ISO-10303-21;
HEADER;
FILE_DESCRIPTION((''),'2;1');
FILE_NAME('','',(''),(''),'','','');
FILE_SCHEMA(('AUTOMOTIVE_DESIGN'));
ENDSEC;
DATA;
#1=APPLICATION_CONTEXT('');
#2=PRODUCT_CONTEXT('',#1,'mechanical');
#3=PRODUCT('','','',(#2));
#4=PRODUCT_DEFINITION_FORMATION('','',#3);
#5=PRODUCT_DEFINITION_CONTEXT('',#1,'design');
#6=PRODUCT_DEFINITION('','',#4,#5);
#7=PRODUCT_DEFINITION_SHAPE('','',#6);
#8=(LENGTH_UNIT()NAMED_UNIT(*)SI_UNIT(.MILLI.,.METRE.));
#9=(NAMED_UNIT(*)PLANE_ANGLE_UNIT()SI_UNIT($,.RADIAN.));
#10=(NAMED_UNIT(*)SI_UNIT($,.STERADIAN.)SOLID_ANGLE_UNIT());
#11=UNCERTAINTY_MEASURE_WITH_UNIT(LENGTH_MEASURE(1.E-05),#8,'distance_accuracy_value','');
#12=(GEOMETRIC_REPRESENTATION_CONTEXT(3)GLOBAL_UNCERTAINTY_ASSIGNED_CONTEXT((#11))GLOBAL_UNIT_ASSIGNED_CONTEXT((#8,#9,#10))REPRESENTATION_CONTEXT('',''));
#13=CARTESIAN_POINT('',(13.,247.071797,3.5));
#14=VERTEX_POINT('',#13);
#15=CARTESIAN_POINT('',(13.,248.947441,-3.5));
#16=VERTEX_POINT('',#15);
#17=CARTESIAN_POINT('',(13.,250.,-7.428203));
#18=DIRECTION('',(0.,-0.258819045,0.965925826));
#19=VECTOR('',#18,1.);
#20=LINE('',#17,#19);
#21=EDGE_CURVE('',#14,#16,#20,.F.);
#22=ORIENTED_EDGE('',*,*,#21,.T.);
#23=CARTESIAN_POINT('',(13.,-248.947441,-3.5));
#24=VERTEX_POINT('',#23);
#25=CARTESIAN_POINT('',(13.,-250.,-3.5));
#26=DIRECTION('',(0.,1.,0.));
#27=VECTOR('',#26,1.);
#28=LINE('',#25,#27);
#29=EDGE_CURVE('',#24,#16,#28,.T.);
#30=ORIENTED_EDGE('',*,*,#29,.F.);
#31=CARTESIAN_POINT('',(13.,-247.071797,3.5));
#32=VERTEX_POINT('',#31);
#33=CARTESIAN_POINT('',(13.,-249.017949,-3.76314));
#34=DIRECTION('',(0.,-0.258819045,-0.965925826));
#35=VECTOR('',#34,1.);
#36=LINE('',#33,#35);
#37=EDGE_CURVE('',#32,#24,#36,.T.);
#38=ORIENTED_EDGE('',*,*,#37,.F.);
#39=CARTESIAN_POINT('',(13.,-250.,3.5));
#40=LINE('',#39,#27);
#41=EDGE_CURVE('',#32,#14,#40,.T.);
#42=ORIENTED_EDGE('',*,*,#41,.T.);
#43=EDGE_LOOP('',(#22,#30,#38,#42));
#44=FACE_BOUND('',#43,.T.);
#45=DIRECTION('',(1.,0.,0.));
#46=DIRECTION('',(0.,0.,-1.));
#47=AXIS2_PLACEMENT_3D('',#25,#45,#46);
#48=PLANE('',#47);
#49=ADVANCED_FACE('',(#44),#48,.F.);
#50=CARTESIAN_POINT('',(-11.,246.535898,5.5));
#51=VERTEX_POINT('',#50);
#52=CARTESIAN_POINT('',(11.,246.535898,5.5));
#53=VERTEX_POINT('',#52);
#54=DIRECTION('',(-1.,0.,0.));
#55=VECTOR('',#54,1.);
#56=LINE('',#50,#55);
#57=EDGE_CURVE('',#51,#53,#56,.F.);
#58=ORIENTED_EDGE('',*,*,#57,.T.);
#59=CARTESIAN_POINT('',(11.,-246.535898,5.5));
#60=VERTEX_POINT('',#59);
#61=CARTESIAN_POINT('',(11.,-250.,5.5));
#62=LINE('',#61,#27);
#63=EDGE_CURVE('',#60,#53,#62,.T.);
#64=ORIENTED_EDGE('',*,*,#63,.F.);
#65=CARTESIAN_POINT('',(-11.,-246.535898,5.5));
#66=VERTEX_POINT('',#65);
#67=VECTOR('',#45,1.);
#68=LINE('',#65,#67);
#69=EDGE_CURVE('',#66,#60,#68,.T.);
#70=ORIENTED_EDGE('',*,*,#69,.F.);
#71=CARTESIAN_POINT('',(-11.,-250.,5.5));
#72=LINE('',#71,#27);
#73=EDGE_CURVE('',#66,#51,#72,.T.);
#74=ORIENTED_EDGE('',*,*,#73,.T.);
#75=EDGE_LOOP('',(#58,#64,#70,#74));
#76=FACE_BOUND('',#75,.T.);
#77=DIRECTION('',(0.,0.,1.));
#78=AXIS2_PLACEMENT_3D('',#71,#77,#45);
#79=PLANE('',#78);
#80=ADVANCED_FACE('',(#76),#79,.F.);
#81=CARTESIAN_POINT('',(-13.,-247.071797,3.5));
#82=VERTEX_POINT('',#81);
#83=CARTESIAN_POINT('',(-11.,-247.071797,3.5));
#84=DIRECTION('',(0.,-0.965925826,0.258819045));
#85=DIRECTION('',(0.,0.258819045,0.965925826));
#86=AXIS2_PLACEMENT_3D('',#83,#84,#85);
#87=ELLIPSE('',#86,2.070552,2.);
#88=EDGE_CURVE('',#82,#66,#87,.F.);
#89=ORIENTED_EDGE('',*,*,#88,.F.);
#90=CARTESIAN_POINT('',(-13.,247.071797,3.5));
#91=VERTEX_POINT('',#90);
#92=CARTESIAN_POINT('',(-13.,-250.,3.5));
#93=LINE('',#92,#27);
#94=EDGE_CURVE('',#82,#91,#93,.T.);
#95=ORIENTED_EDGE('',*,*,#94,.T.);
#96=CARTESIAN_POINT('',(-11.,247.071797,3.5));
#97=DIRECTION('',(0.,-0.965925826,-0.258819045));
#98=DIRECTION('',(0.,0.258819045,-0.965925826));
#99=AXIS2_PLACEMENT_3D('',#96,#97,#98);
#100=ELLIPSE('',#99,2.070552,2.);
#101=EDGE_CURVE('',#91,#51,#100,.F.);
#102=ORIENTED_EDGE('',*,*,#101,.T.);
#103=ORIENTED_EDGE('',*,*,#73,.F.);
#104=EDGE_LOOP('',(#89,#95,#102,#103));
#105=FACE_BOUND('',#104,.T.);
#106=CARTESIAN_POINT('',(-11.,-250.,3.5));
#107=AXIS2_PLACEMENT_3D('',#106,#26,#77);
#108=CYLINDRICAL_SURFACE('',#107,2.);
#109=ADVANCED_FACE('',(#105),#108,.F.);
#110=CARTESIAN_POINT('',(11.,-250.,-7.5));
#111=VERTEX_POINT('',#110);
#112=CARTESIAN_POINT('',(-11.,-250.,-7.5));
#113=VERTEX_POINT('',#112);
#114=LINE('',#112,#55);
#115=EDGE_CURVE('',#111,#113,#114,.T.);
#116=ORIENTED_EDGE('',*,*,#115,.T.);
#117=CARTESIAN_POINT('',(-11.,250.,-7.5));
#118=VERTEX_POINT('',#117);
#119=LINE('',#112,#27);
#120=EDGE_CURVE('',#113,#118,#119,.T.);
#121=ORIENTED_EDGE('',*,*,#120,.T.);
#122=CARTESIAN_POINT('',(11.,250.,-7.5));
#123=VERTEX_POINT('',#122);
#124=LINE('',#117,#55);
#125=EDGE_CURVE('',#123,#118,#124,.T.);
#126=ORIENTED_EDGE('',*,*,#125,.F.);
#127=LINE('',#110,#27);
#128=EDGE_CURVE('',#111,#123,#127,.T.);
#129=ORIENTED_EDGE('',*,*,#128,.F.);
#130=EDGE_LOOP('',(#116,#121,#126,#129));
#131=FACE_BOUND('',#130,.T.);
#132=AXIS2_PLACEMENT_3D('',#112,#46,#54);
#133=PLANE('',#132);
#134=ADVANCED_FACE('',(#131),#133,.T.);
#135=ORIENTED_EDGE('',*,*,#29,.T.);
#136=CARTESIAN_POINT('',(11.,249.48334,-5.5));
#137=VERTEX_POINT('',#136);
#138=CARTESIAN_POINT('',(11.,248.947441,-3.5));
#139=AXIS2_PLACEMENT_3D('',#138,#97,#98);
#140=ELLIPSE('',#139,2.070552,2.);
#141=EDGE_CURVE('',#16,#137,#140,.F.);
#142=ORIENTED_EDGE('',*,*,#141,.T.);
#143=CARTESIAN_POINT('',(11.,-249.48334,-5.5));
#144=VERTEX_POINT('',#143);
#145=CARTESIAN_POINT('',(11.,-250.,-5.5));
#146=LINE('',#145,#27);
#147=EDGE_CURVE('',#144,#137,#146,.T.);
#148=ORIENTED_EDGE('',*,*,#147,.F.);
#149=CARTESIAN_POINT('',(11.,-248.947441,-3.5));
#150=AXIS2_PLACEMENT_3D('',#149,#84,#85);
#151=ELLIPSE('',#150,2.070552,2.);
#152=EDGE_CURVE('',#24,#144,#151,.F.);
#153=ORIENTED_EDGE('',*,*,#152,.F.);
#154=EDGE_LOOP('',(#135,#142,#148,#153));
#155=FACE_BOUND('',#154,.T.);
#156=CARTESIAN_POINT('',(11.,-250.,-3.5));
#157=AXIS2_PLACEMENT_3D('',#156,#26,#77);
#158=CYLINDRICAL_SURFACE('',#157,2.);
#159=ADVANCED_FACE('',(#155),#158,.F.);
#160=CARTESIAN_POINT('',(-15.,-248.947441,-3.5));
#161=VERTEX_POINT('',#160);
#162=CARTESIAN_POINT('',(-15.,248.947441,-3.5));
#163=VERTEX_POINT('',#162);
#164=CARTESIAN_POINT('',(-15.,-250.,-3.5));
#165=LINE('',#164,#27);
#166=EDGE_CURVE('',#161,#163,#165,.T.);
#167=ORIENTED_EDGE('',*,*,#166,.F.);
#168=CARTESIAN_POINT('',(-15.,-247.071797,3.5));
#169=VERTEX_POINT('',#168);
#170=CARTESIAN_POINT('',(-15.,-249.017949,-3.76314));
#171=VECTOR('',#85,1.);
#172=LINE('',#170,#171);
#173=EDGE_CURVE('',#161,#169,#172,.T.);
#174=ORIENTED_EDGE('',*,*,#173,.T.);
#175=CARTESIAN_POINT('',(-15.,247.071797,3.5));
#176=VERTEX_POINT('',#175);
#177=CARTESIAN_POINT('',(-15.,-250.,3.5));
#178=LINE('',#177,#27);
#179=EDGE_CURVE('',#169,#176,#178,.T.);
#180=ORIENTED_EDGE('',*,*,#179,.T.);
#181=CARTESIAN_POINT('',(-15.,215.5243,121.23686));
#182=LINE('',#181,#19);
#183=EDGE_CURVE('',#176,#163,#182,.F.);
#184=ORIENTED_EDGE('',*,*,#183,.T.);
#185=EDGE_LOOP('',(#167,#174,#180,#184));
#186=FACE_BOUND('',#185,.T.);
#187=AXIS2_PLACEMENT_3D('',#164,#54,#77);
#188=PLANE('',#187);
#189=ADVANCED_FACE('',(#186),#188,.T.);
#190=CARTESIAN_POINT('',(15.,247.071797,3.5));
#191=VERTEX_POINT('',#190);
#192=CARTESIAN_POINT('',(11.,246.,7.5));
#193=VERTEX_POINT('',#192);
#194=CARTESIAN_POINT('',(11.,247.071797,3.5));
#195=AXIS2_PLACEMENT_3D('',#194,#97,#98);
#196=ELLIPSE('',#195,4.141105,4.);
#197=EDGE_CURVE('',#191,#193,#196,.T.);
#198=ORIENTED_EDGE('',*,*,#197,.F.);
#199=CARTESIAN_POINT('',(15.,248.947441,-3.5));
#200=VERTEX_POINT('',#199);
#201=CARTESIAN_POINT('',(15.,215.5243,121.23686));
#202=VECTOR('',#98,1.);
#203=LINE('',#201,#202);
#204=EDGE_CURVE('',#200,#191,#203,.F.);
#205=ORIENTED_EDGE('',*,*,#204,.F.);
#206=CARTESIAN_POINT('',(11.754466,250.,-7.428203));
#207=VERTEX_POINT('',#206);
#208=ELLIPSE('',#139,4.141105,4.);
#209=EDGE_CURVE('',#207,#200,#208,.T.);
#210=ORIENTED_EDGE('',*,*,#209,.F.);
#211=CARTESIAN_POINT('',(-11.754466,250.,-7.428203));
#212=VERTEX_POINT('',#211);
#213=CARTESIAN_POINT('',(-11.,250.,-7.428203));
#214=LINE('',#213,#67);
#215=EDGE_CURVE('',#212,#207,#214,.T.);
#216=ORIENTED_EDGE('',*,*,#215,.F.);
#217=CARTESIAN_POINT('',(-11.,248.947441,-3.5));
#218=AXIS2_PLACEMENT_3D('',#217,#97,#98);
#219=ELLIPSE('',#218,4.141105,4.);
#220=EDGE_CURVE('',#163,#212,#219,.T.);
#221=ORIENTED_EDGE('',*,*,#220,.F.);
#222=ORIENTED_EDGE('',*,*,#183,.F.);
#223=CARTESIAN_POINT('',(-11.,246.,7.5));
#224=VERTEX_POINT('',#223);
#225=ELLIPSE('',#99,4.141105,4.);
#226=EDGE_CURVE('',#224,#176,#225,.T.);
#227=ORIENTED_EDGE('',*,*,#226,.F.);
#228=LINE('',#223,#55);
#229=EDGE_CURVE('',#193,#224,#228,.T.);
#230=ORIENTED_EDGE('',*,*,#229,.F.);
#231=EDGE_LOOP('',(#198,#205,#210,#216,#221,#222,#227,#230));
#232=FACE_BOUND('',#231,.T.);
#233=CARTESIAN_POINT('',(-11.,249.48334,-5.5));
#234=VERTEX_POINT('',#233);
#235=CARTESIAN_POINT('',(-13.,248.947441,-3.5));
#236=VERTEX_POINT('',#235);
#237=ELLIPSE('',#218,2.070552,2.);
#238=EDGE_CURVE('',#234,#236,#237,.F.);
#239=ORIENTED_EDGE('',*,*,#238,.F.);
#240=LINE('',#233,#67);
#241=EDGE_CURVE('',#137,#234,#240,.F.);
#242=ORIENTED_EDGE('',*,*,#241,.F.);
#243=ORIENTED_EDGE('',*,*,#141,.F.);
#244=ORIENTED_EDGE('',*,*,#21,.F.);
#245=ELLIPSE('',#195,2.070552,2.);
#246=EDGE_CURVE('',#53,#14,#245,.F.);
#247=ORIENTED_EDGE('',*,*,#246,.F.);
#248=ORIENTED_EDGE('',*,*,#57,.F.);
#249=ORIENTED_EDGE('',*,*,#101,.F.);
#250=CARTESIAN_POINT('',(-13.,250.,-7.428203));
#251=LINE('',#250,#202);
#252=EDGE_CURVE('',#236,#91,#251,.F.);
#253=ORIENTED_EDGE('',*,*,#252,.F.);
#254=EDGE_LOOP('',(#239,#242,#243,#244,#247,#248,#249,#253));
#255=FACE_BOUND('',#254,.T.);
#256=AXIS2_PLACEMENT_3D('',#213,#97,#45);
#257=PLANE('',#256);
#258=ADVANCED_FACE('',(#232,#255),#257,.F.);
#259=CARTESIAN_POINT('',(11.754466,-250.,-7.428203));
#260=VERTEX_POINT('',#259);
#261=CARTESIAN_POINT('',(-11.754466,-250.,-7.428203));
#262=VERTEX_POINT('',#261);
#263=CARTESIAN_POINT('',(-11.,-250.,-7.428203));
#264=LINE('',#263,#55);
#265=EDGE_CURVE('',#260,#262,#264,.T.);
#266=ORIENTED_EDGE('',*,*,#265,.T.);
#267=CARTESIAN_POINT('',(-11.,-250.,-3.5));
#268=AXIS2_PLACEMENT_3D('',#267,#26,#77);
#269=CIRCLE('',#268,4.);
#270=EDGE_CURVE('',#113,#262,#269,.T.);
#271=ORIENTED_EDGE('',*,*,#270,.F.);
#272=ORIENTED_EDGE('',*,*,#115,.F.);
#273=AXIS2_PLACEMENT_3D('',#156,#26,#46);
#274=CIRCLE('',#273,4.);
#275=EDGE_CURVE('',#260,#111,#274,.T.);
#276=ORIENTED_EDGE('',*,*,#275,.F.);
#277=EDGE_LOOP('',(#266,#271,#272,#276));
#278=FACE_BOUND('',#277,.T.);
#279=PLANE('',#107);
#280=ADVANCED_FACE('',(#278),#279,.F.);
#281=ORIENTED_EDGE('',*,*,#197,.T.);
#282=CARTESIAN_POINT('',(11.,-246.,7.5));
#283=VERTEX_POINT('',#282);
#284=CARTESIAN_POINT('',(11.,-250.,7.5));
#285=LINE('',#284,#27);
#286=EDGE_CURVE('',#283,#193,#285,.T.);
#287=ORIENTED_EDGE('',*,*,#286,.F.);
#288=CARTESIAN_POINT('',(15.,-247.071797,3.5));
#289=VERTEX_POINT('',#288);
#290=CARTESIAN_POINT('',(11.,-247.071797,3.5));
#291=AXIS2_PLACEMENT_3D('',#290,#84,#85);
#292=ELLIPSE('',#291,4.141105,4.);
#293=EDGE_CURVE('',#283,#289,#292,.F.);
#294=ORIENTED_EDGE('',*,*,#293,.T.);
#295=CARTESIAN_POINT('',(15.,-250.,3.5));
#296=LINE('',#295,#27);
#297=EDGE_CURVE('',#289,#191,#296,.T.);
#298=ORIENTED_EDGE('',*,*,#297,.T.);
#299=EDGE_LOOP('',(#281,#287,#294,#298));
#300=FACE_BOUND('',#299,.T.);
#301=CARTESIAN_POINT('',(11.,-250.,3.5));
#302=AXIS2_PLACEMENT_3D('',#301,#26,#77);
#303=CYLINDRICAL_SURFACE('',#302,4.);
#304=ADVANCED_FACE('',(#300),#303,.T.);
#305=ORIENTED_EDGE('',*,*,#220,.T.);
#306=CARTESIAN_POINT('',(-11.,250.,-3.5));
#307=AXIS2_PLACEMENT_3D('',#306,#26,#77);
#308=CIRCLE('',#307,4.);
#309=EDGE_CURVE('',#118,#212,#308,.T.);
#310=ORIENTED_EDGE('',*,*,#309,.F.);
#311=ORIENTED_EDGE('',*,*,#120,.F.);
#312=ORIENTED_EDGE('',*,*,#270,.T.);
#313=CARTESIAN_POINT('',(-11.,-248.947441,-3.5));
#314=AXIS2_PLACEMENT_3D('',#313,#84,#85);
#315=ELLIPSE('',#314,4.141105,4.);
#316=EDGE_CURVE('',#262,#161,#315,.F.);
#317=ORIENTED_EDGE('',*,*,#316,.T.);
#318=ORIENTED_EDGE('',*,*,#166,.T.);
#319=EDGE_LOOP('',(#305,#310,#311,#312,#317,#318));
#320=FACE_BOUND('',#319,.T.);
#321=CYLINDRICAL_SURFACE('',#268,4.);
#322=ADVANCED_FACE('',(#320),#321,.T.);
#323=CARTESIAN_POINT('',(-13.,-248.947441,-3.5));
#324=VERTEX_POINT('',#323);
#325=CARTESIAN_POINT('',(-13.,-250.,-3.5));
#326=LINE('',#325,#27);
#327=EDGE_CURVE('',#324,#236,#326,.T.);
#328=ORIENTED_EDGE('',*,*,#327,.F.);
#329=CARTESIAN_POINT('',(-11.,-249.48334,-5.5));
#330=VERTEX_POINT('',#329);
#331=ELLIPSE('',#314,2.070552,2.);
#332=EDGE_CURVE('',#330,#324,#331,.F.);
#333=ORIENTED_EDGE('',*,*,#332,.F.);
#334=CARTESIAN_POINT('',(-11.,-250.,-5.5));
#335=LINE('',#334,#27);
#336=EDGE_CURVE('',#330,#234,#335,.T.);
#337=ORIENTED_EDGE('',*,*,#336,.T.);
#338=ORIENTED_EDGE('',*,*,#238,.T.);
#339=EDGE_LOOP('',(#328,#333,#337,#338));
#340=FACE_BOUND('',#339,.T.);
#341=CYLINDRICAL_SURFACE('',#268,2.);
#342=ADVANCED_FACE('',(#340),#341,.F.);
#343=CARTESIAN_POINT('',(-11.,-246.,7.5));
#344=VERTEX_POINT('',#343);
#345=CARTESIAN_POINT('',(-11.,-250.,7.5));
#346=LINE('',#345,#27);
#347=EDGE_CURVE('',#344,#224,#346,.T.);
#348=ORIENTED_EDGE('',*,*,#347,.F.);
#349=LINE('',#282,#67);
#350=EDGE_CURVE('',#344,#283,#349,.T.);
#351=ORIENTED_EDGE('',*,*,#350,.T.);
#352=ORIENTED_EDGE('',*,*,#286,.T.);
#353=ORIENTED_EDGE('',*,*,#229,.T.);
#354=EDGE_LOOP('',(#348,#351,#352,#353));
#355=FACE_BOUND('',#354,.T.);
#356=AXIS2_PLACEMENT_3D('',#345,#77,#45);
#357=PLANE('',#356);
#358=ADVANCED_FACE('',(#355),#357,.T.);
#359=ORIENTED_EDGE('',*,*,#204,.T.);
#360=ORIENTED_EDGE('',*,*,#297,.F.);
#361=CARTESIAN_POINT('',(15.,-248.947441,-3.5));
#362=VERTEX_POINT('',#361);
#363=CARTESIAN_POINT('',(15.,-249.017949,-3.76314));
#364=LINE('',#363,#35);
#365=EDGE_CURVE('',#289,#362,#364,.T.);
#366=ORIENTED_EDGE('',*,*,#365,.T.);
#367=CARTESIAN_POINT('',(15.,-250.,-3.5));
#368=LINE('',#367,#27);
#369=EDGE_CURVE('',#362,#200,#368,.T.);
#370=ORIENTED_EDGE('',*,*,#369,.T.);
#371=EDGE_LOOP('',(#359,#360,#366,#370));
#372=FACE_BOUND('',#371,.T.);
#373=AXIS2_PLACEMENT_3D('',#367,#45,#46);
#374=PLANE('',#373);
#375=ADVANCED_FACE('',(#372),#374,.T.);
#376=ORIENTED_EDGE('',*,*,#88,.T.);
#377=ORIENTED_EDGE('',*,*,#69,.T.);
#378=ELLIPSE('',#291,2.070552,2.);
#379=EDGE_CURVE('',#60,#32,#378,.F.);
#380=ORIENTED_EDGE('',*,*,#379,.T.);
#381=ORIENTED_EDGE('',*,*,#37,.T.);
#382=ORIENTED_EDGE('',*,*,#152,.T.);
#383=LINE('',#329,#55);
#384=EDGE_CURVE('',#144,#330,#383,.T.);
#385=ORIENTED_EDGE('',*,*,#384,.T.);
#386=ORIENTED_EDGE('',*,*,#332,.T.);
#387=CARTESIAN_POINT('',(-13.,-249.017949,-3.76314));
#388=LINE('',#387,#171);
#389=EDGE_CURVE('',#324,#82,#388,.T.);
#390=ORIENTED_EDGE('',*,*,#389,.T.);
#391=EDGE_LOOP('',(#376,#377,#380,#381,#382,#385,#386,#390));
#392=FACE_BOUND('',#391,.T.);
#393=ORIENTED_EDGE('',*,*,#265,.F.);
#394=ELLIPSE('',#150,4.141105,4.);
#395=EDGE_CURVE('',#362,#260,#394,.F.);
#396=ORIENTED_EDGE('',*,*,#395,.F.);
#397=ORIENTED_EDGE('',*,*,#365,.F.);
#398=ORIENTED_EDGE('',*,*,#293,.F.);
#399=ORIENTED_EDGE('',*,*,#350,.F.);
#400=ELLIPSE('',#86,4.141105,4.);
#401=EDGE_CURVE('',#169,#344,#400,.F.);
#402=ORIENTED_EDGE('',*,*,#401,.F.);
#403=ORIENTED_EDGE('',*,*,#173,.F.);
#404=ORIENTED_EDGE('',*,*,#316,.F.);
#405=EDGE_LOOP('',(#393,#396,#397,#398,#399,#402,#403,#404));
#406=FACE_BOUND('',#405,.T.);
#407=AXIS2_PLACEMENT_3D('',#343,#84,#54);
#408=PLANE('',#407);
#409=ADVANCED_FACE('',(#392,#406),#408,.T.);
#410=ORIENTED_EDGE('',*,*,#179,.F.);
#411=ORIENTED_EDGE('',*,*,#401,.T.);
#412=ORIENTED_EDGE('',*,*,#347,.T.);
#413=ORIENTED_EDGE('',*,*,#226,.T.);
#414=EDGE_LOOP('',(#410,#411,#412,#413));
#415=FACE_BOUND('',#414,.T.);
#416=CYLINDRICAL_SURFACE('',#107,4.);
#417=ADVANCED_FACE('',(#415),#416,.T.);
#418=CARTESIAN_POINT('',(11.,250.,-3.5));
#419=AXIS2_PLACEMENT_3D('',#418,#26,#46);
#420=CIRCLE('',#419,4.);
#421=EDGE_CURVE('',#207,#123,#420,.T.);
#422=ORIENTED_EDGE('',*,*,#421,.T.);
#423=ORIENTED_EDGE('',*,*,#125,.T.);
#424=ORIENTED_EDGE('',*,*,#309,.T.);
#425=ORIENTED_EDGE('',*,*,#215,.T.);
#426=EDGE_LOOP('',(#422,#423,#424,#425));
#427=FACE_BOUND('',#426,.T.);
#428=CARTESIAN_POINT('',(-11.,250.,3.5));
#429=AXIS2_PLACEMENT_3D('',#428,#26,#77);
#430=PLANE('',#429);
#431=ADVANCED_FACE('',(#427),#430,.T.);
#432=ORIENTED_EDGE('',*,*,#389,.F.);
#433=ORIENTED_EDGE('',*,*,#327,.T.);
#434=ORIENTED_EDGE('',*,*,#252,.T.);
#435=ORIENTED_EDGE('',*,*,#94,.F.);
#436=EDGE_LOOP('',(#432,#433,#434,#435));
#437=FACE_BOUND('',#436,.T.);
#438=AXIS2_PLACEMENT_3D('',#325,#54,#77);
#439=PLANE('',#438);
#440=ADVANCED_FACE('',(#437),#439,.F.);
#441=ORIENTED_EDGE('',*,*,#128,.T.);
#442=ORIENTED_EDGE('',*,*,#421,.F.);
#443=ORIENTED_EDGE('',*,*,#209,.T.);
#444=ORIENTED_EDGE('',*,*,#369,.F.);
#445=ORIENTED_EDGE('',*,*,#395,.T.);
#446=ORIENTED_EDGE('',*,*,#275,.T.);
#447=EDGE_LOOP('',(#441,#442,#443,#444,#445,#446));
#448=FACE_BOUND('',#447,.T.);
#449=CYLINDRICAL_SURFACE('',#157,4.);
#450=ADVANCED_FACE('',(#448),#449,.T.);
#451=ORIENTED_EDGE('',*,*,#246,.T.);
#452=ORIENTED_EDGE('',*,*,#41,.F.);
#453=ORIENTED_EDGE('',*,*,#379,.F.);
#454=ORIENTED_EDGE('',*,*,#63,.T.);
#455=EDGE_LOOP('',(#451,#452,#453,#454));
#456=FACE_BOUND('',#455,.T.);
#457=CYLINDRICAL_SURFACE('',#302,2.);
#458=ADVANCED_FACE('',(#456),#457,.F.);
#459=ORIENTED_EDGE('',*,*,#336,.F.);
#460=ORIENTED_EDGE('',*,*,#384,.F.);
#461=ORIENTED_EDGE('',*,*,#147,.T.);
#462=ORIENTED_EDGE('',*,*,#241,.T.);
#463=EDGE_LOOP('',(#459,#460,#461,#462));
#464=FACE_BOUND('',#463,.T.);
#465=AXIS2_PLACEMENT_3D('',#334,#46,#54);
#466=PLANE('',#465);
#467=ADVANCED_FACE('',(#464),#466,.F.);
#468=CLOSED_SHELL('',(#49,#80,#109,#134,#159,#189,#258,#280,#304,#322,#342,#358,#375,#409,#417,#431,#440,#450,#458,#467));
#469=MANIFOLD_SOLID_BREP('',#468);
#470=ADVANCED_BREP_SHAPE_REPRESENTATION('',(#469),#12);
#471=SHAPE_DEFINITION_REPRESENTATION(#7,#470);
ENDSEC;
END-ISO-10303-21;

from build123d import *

# Parameters (mm, degrees)
EXTRUDE_1_DEPTH      = 250
EXTRUDE_1_DEPTH_BACK = 250
CHAMFER_1_SIZE       = 4
CHAMFER_1_SIZE_2     = 14.92820323


with BuildPart() as part:
    # Эскиз1 → Вытянуть-Тонкостенный1 (new, two sides: drawn at the far end of the back side and taken through both)
    with BuildSketch(Plane(origin=(0, 0, 0), x_dir=(1, 0, 0), z_dir=(0, 1, 0)).offset(-EXTRUDE_1_DEPTH_BACK)):
        with BuildLine():
            Line((-11, 7.5), (11, 7.5))
            ThreePointArc((11, 7.5), (13.828427125, 6.328427125), (15, 3.5))
            Line((15, 3.5), (15, -3.5))
            ThreePointArc((15, -3.5), (13.828427125, -6.328427125), (11, -7.5))
            Line((11, -7.5), (-11, -7.5))
            ThreePointArc((-11, -7.5), (-13.828427125, -6.328427125), (-15, -3.5))
            Line((-15, -3.5), (-15, 3.5))
            ThreePointArc((-15, 3.5), (-13.828427125, 6.328427125), (-11, 7.5))
        make_face()
        with BuildLine():
            Line((-11, 5.5), (11, 5.5))
            ThreePointArc((11, 5.5), (12.414213562, 4.914213562), (13, 3.5))
            Line((13, 3.5), (13, -3.5))
            ThreePointArc((13, -3.5), (12.414213562, -4.914213562), (11, -5.5))
            Line((11, -5.5), (-11, -5.5))
            ThreePointArc((-11, -5.5), (-12.414213562, -4.914213562), (-13, -3.5))
            Line((-13, -3.5), (-13, 3.5))
            ThreePointArc((-13, 3.5), (-12.414213562, 4.914213562), (-11, 5.5))
        make_face(mode=Mode.SUBTRACT)
    extrude(amount=EXTRUDE_1_DEPTH + EXTRUDE_1_DEPTH_BACK)

    # Фаска1
    # the kernel refuses this chamfer: 14.92820323, 4 mm, written as the material it takes off along each edge
    with BuildSketch(Plane(origin=(49.764387332, -250, 7.5), x_dir=(0, 0.9905000388259542, 0.13751244702129073), z_dir=(-1, 0, 0))) as chamfer_1_piece_1:
        Polygon((CHAMFER_1_SIZE * 0.990500038826, CHAMFER_1_SIZE * 0.137512447021), (-CHAMFER_1_SIZE_2 * 0.137512447024, CHAMFER_1_SIZE_2 * 0.990500038844), (0, 0), align=None)
    extrude(amount=99.528774665, mode=Mode.SUBTRACT)
    with BuildSketch(Plane(origin=(49.764387332, 250, 7.5), x_dir=(0, -0.9905000388259542, 0.13751244702129073), z_dir=(-1, 0, 0))) as chamfer_1_piece_2:
        Polygon((CHAMFER_1_SIZE * 0.990500038826, -CHAMFER_1_SIZE * 0.137512447021), (-CHAMFER_1_SIZE_2 * 0.137512447024, -CHAMFER_1_SIZE_2 * 0.990500038844), (0, 0), align=None)
    extrude(amount=99.528774665, mode=Mode.SUBTRACT)


solid = part.part
